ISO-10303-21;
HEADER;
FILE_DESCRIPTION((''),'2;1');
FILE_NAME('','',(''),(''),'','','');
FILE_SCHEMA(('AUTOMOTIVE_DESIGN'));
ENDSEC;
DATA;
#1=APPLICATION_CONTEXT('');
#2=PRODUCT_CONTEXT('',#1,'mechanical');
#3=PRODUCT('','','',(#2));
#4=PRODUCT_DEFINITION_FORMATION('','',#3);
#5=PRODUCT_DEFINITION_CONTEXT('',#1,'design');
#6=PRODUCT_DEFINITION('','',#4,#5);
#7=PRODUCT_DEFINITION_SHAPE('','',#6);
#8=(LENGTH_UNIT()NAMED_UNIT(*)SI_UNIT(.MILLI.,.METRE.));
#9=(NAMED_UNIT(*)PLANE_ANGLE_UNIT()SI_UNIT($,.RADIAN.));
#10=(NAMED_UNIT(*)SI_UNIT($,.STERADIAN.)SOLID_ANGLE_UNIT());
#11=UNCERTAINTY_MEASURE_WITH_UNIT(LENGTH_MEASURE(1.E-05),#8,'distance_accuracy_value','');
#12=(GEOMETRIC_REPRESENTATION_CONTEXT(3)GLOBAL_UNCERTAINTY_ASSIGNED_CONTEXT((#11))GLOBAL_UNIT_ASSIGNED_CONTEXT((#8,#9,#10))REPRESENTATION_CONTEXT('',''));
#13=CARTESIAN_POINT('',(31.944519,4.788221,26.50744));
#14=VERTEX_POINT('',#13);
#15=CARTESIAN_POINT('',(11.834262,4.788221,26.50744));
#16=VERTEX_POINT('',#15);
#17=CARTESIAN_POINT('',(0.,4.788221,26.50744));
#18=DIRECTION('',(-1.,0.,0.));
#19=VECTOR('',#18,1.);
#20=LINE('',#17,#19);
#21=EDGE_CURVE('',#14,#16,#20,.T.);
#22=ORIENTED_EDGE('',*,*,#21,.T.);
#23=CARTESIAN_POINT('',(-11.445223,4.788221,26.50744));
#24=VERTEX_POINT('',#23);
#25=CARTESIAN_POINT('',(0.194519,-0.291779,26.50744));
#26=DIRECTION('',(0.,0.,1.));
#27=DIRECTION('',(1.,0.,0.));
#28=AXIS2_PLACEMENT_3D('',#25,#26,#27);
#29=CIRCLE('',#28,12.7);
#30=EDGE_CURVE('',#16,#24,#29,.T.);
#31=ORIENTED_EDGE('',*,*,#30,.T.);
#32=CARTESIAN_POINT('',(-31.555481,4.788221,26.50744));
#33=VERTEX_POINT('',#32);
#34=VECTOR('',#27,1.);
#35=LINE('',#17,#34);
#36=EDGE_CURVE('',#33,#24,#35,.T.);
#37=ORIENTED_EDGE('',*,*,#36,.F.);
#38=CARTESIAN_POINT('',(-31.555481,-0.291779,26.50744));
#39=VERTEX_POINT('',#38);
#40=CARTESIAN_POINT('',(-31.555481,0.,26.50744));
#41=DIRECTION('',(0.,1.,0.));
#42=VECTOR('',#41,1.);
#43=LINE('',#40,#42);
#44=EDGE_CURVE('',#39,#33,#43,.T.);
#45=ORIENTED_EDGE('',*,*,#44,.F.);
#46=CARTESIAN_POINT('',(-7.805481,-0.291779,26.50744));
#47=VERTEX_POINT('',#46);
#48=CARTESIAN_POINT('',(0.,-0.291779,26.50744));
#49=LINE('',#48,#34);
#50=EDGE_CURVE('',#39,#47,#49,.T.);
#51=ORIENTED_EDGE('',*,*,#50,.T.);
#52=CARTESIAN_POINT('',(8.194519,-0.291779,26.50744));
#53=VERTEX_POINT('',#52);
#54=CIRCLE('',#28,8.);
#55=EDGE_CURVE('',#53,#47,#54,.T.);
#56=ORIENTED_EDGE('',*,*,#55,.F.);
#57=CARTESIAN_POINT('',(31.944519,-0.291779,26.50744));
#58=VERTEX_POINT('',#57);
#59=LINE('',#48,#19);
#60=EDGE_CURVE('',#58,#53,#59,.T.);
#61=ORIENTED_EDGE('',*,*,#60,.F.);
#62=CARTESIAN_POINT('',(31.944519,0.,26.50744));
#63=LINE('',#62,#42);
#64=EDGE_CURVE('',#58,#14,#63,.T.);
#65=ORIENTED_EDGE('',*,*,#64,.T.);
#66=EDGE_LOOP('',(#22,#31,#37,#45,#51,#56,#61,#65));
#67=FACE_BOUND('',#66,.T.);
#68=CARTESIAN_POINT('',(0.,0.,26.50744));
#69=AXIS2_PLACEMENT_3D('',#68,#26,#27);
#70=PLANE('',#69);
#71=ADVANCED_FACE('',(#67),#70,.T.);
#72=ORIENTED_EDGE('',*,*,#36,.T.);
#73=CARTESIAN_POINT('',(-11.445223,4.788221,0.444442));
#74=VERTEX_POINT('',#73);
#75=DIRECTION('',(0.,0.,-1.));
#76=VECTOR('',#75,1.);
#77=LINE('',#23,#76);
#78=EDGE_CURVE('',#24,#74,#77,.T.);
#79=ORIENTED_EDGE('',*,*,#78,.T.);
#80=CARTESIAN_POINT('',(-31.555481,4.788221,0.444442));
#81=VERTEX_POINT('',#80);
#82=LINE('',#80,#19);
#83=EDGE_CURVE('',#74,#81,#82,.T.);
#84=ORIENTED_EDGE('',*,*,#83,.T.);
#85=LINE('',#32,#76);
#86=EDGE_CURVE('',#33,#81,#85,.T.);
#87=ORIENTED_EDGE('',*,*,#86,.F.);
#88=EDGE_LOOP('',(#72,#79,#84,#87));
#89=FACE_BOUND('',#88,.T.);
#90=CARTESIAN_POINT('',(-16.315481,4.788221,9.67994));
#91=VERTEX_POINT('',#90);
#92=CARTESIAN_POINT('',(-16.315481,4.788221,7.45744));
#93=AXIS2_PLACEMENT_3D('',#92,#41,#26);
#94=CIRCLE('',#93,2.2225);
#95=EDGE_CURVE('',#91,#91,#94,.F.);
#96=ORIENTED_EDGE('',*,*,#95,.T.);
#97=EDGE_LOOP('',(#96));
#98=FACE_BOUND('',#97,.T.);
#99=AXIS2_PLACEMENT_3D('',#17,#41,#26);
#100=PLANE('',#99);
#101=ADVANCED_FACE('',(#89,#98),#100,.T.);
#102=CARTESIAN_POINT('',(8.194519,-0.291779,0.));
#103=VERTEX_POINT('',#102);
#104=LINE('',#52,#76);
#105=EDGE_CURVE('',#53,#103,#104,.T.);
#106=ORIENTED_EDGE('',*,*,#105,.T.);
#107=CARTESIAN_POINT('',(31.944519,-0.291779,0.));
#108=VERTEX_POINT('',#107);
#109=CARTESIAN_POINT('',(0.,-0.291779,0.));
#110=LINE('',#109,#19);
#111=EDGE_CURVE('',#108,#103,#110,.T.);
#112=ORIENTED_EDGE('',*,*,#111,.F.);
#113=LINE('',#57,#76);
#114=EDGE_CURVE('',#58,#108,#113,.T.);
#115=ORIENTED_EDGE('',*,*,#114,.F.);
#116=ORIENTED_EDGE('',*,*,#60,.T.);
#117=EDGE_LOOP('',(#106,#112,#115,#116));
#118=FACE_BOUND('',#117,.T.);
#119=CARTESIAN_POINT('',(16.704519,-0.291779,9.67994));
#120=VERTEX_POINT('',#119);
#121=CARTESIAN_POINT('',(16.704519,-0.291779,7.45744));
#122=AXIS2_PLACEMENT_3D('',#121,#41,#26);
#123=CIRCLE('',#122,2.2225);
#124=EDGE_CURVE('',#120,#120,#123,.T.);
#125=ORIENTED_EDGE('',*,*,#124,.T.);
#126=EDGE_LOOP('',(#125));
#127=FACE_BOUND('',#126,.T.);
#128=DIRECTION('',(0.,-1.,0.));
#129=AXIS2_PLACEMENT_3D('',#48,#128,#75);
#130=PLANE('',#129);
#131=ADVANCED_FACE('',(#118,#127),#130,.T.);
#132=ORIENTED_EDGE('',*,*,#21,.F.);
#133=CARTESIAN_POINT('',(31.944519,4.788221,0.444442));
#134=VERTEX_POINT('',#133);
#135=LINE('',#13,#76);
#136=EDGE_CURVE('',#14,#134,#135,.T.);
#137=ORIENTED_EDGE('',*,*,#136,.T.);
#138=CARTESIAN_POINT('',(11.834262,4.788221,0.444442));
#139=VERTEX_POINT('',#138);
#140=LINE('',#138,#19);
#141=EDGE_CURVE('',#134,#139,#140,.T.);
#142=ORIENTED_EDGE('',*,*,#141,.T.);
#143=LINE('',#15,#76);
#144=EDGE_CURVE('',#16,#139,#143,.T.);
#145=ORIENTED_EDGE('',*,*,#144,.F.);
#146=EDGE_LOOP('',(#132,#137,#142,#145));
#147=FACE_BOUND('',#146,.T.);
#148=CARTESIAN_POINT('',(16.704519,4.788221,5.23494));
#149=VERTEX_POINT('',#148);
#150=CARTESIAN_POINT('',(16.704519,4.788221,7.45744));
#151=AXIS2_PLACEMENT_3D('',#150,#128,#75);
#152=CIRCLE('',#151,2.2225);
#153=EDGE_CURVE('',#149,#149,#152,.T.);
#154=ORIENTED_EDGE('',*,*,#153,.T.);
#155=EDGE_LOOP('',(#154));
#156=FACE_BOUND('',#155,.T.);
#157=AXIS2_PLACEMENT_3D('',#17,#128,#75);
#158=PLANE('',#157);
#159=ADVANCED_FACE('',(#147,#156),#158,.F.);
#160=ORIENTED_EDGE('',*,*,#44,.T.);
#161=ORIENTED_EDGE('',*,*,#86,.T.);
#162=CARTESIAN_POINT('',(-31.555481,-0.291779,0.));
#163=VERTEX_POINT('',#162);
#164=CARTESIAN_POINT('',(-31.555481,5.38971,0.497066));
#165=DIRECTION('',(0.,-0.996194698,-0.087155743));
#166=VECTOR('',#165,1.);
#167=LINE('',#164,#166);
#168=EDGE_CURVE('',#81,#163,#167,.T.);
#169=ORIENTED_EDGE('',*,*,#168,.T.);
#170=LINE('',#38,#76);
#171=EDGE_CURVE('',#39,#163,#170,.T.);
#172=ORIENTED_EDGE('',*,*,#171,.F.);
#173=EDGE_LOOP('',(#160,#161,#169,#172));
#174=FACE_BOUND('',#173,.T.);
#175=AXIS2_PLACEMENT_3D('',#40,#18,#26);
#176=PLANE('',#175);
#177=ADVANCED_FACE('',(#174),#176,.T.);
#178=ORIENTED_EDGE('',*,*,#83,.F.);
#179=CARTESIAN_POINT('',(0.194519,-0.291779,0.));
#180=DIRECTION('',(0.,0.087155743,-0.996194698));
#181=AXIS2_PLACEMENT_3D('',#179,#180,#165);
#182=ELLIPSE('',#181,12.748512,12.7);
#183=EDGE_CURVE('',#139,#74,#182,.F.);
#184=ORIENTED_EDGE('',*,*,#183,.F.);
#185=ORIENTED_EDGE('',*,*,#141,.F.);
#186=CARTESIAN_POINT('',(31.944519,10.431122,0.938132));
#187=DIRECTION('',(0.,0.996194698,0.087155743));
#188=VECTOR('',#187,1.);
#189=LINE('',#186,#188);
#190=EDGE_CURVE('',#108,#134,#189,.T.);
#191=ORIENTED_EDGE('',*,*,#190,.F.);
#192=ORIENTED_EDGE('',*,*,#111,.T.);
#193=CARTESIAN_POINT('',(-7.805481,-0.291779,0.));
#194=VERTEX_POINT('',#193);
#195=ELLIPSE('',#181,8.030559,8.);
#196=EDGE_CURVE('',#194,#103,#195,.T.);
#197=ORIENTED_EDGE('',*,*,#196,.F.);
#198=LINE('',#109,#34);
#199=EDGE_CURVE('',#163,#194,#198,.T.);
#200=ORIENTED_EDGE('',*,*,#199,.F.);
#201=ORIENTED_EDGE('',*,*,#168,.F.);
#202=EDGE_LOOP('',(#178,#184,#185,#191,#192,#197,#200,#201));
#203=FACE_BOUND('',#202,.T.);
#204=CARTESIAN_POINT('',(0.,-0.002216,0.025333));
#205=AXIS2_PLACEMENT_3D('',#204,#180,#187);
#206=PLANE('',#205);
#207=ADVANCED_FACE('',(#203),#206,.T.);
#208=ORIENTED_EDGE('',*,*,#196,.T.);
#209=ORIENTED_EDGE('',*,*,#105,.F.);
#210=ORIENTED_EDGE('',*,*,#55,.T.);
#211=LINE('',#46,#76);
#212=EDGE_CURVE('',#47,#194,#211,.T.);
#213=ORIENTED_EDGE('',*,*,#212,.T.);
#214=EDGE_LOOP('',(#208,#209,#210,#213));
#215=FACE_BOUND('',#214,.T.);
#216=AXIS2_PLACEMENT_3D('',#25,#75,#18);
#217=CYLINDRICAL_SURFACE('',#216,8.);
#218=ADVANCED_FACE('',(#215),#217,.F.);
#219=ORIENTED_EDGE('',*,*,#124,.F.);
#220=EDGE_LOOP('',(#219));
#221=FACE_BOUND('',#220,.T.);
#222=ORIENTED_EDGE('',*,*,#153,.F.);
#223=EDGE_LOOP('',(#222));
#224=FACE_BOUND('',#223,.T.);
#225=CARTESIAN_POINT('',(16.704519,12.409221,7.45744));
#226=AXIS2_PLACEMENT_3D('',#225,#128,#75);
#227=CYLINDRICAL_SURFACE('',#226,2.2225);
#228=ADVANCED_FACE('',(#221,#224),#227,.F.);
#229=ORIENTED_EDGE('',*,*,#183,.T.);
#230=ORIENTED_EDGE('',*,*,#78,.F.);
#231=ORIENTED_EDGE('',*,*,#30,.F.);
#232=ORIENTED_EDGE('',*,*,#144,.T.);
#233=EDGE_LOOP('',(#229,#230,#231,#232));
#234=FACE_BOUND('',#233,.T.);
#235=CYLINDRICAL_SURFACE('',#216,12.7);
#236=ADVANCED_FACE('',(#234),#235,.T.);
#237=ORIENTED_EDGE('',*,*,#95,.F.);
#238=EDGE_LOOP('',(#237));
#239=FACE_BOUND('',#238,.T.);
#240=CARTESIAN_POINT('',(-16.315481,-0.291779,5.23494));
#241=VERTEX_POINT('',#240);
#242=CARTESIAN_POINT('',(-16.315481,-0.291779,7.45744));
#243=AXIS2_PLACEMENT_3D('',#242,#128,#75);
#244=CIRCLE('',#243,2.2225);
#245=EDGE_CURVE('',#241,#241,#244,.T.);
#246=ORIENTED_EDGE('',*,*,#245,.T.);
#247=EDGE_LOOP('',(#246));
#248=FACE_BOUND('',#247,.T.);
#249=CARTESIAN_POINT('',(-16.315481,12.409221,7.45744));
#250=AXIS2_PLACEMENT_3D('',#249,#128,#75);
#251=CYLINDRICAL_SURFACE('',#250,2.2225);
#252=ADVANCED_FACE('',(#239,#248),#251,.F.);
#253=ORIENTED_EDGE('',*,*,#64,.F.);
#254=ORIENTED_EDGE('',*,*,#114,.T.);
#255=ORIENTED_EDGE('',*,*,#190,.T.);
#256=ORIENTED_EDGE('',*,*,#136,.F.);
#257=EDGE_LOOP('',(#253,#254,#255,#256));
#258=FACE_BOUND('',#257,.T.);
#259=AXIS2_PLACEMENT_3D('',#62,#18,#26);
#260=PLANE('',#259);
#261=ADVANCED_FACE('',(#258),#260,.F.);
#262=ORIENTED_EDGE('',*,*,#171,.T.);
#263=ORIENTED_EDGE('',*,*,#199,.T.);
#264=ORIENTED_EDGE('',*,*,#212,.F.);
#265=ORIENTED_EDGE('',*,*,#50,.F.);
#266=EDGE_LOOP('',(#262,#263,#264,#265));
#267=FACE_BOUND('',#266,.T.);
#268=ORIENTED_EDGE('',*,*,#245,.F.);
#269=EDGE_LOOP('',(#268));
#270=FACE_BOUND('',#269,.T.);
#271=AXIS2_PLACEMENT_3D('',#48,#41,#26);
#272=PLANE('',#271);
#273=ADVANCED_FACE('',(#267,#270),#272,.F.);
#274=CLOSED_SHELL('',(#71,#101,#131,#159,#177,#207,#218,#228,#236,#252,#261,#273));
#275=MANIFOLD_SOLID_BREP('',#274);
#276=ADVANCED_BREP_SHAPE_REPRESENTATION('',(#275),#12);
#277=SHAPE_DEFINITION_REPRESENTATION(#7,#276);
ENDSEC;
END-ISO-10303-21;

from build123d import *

# Parameters (mm, degrees)
BOSS_EXTRUDE2_DEPTH    = 26.50744
CUT_EXTRUDE1_START     = -0.02543021
CUT_EXTRUDE1_OUTLINE_W = 66
CUT_EXTRUDE1_OUTLINE_H = 16
CUT_EXTRUDE1_DEPTH     = 1.106877933
CUT_EXTRUDE2_REACH     = 45.41
SKETCH4_R              = 2.2225


# Read off the part's stored shape, not the designer's step: Cut-Extrude1
with BuildPart() as part:
    # Sketch2 → Boss-Extrude2 (new body)
    with BuildSketch(Plane.XY):
        with BuildLine():
            ThreePointArc((-11.445222977, 4.788221067), (-12.237590886, 2.302953542), (-12.505480711, -0.291778933))
            Line((-12.505480711, -0.291778933), (-7.805480711, -0.291778933))
            ThreePointArc((-7.805480711, -0.291778933), (0.194519289, 7.708221067), (8.194519289, -0.291778933))
            Line((8.194519289, -0.291778933), (12.894519289, -0.291778933))
            ThreePointArc((12.894519289, -0.291778933), (12.626629463, 2.302953542), (11.834261554, 4.788221067))
            ThreePointArc((11.834261554, 4.788221067), (0.194519289, 12.408221067), (-11.445222977, 4.788221067))
        make_face()
        with BuildLine():
            Line((-31.555480711, -0.291778933), (-12.505480711, -0.291778933))
            ThreePointArc((-12.505480711, -0.291778933), (-12.237590886, 2.302953542), (-11.445222977, 4.788221067))
            Line((-11.445222977, 4.788221067), (-31.555480711, 4.788221067))
            Line((-31.555480711, 4.788221067), (-31.555480711, -0.291778933))
        make_face()
        with BuildLine():
            ThreePointArc((11.834261554, 4.788221067), (12.626629463, 2.302953542), (12.894519289, -0.291778933))
            Line((12.894519289, -0.291778933), (31.944519289, -0.291778933))
            Line((31.944519289, -0.291778933), (31.944519289, 4.788221067))
            Line((31.944519289, 4.788221067), (11.834261554, 4.788221067))
        make_face()
    extrude(amount=BOSS_EXTRUDE2_DEPTH)

    # Cut-Extrude1 outline → Cut-Extrude1 (cut)
    with BuildSketch(Plane(origin=(0, 0, 0), x_dir=(1, 0, 0), z_dir=(0, 0.08715574274765836, -0.9961946980917455)).offset(CUT_EXTRUDE1_START)):
        with Locations((0, -6)):
            Rectangle(CUT_EXTRUDE1_OUTLINE_W, CUT_EXTRUDE1_OUTLINE_H)
    extrude(amount=CUT_EXTRUDE1_DEPTH, mode=Mode.SUBTRACT)

    # Sketch4 → Cut-Extrude2 (cut, up to next)
    with BuildSketch(Plane.XZ.offset(0.291778933), mode=Mode.PRIVATE) as cut_extrude2_sk1:
        with Locations(Location((-16.315480711, 7.45744, 0), (0, 0, 270))):
            Circle(SKETCH4_R)
    cut_extrude2_tool1 = extrude(cut_extrude2_sk1.sketch, amount=-CUT_EXTRUDE2_REACH, mode=Mode.PRIVATE) & part.part
    # Sketch4 → Cut-Extrude2 (cut, up to next)
    with BuildSketch(Plane.XZ.offset(0.291778933), mode=Mode.PRIVATE) as cut_extrude2_sk2:
        with Locations(Location((16.704519289, 7.45744, 0), (0, 0, 270))):
            Circle(SKETCH4_R)
    cut_extrude2_tool2 = extrude(cut_extrude2_sk2.sketch, amount=-CUT_EXTRUDE2_REACH, mode=Mode.PRIVATE) & part.part
    add(cut_extrude2_tool1.solids().sort_by_distance((-16.315481, -0.291779, 7.45744))[0], mode=Mode.SUBTRACT)
    add(cut_extrude2_tool2.solids().sort_by_distance((16.704519, -0.291779, 7.45744))[0], mode=Mode.SUBTRACT)


solid = part.part
